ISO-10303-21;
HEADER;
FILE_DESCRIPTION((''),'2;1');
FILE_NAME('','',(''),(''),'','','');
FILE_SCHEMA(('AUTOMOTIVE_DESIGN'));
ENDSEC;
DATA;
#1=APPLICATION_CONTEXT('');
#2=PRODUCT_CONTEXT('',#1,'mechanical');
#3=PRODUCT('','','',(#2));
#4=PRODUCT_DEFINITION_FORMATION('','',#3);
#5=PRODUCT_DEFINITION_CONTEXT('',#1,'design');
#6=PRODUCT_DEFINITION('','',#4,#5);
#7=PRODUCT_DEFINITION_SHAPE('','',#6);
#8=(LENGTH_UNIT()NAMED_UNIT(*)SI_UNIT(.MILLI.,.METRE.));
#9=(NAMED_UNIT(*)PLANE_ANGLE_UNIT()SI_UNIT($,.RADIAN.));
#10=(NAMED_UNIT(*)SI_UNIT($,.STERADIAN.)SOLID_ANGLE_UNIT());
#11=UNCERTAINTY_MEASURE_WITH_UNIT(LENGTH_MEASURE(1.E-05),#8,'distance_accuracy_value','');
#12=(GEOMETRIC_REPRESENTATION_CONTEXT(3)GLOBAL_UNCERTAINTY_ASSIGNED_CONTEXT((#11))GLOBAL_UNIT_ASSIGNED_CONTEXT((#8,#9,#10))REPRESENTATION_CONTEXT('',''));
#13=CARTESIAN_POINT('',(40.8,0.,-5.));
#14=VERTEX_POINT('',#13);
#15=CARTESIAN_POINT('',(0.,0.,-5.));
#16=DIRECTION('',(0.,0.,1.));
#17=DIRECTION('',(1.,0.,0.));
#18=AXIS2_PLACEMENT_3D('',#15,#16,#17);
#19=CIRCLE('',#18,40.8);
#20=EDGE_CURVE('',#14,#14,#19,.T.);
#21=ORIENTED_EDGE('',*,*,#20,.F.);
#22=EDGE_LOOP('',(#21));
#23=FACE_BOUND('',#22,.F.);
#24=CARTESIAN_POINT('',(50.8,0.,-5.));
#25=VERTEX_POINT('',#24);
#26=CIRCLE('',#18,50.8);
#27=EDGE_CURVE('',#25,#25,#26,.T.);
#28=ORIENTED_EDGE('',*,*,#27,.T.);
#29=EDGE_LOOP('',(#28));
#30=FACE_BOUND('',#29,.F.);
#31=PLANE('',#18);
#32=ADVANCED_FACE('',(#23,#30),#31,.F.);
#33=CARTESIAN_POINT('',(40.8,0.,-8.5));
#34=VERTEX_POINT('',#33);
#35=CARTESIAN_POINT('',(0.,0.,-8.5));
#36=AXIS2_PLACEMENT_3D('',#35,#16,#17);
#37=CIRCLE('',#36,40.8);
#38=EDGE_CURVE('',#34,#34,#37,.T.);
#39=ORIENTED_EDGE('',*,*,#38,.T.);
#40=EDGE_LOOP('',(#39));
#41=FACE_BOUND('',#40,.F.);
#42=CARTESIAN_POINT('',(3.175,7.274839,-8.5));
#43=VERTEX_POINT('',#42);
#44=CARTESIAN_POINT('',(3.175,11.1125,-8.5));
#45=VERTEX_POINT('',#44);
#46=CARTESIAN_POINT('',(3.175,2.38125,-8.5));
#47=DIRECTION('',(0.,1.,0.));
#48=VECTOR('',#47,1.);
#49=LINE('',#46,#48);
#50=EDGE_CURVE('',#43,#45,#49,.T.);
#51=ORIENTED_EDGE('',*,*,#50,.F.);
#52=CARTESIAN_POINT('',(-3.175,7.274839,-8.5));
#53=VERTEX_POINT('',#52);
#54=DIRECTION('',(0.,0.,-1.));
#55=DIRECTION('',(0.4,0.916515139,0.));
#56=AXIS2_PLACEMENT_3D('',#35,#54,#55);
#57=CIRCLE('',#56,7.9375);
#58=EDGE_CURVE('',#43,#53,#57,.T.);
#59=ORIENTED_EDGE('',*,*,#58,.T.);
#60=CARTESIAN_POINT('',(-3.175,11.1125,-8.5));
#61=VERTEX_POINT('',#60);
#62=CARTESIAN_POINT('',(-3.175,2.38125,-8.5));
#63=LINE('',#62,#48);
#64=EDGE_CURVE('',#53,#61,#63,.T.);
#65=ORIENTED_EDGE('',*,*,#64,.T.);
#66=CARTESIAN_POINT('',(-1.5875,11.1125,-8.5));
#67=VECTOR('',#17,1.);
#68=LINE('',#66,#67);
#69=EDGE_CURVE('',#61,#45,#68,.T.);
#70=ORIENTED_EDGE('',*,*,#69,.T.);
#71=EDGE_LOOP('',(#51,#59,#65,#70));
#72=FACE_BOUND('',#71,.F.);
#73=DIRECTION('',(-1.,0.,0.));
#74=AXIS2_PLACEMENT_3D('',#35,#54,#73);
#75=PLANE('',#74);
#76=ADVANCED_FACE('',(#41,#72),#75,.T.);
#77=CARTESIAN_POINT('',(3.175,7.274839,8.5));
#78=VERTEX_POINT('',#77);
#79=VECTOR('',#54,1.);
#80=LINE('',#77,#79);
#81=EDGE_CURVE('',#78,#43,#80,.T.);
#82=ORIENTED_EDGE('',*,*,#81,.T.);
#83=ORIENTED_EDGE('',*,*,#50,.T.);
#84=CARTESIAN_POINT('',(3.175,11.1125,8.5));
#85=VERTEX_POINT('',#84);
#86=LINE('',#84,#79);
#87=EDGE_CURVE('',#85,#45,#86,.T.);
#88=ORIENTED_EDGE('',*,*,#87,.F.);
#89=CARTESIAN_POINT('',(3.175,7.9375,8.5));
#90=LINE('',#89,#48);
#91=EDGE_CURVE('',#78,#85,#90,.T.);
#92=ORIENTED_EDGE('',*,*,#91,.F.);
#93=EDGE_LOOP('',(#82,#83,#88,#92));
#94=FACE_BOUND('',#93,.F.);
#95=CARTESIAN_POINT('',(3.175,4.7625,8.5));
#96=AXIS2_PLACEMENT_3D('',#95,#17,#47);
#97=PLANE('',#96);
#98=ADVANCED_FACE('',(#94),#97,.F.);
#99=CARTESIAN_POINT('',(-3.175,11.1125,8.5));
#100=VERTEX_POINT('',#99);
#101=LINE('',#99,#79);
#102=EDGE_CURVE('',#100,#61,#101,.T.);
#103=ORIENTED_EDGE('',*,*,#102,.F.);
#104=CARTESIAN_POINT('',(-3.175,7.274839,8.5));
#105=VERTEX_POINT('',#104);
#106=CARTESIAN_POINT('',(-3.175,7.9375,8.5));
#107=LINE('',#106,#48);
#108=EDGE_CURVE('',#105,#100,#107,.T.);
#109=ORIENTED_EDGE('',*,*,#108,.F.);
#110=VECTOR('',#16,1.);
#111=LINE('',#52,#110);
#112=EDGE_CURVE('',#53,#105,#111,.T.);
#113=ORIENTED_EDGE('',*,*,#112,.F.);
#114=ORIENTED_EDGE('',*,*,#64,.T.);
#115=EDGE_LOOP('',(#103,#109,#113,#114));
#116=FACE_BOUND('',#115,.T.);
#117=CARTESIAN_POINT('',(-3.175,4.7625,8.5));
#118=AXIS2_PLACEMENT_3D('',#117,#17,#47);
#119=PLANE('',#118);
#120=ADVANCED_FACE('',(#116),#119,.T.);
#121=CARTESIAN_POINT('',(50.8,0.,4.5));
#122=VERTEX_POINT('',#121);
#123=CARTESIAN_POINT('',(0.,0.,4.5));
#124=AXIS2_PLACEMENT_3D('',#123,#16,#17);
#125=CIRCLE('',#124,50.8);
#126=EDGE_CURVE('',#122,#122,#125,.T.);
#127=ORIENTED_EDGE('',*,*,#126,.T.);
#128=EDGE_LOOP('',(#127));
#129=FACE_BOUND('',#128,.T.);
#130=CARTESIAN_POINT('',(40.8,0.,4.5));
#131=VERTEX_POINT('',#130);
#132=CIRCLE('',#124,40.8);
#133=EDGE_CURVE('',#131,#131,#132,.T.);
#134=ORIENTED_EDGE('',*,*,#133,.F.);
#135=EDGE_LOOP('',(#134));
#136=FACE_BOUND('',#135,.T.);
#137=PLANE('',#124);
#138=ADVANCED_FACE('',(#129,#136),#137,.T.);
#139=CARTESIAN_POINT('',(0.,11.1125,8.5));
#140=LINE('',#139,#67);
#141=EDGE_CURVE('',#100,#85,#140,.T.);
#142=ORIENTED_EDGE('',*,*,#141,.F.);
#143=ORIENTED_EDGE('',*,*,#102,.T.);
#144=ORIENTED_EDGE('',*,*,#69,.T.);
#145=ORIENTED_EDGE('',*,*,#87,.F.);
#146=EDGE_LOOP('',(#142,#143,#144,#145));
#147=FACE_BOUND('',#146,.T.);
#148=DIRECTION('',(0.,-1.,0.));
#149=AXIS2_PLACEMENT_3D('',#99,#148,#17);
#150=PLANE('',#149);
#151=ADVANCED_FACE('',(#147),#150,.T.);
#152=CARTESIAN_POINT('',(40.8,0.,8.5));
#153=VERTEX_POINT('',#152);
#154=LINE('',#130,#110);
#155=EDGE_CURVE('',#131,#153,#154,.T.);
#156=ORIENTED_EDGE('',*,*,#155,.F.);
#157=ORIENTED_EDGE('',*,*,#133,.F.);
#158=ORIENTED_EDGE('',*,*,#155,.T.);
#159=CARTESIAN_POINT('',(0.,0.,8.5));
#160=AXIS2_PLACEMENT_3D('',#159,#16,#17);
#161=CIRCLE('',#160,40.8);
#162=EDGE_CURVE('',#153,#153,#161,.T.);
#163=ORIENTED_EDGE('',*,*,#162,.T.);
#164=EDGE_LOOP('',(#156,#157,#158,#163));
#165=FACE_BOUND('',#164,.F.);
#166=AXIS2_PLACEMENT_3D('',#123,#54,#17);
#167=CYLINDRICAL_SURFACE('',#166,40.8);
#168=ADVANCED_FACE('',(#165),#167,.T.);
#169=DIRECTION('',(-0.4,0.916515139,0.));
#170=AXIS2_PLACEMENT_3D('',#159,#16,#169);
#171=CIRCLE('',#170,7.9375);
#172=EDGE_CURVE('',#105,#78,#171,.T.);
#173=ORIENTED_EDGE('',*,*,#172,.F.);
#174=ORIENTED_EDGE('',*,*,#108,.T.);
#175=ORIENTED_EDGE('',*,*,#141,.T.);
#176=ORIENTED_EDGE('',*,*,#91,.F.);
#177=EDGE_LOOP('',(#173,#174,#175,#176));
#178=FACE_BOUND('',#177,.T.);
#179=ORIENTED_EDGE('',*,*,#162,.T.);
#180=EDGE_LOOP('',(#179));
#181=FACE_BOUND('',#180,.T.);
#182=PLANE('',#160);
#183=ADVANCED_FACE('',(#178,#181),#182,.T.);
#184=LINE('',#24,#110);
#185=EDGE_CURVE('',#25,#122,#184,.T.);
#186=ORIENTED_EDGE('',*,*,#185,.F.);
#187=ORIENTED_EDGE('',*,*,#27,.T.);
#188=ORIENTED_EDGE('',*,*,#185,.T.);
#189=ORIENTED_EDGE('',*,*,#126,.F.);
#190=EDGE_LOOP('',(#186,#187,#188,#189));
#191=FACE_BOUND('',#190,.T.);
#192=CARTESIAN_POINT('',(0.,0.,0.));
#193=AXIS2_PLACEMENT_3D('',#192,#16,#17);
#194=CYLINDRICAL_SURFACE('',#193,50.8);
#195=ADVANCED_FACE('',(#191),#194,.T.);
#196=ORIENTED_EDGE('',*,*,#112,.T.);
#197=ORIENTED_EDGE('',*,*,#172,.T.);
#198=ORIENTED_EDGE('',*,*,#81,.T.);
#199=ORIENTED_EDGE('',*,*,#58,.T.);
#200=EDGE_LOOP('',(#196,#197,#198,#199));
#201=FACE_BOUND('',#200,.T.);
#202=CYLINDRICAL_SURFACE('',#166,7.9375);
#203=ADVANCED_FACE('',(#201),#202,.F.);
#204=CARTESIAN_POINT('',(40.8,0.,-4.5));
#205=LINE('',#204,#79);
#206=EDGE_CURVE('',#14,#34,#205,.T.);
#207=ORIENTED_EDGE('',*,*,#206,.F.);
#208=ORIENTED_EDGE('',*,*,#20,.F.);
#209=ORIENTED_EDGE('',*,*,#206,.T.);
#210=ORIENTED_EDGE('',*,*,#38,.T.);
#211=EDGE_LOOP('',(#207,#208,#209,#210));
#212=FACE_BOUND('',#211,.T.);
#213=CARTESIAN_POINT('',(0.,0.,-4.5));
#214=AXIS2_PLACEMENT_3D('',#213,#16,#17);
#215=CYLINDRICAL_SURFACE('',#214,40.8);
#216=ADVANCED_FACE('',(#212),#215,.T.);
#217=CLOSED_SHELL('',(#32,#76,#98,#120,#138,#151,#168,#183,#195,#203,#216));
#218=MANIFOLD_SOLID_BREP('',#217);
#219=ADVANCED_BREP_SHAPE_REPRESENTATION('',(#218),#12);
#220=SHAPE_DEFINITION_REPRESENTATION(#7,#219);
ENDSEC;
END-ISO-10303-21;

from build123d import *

# Parameters (mm, degrees)
F0_R          = 50.8
F0_R_2        = 7.9375
F1_DEPTH      = 4.5
F1_DEPTH_BACK = 5
F2_R          = 40.8
F2_R_2        = 7.9375
F3_DEPTH      = 4
F4_W          = 6.35
F4_H          = 6.35
F5_DEPTH      = 17.001


# Not quite as in the source:
# - a pattern or mirror of a feature is missing from the dataset's text; its kind, count and spacing are read off the source's solid


with BuildPart() as f1:
    # F0 (on Top) → F1 (new body, two sides)
    with BuildSketch(Plane.XY) as f1_sk:
        Circle(F0_R)
        Circle(F0_R_2, mode=Mode.SUBTRACT)
    extrude(amount=F1_DEPTH)
    extrude(f1_sk.sketch, amount=-F1_DEPTH_BACK)

    # F2 (on face) → F3 (join)
    with BuildSketch(Plane.XY.offset(4.5)):
        Circle(F2_R)
        Circle(F2_R_2, mode=Mode.SUBTRACT)
    f3 = extrude(amount=F3_DEPTH)

    # F3_copies: F3 across plane
    add(f3.mirror(Plane(origin=(0, 0, 0), x_dir=(-1, 0, 0), z_dir=(0, 0, -1))))

    # F4 (on face) → F5 (cut, through all)
    with BuildSketch(Plane.XY.offset(8.5)):
        with Locations((0, 7.9375)):
            Rectangle(F4_W, F4_H)
    extrude(amount=-F5_DEPTH, mode=Mode.SUBTRACT)


solid = f1.part
